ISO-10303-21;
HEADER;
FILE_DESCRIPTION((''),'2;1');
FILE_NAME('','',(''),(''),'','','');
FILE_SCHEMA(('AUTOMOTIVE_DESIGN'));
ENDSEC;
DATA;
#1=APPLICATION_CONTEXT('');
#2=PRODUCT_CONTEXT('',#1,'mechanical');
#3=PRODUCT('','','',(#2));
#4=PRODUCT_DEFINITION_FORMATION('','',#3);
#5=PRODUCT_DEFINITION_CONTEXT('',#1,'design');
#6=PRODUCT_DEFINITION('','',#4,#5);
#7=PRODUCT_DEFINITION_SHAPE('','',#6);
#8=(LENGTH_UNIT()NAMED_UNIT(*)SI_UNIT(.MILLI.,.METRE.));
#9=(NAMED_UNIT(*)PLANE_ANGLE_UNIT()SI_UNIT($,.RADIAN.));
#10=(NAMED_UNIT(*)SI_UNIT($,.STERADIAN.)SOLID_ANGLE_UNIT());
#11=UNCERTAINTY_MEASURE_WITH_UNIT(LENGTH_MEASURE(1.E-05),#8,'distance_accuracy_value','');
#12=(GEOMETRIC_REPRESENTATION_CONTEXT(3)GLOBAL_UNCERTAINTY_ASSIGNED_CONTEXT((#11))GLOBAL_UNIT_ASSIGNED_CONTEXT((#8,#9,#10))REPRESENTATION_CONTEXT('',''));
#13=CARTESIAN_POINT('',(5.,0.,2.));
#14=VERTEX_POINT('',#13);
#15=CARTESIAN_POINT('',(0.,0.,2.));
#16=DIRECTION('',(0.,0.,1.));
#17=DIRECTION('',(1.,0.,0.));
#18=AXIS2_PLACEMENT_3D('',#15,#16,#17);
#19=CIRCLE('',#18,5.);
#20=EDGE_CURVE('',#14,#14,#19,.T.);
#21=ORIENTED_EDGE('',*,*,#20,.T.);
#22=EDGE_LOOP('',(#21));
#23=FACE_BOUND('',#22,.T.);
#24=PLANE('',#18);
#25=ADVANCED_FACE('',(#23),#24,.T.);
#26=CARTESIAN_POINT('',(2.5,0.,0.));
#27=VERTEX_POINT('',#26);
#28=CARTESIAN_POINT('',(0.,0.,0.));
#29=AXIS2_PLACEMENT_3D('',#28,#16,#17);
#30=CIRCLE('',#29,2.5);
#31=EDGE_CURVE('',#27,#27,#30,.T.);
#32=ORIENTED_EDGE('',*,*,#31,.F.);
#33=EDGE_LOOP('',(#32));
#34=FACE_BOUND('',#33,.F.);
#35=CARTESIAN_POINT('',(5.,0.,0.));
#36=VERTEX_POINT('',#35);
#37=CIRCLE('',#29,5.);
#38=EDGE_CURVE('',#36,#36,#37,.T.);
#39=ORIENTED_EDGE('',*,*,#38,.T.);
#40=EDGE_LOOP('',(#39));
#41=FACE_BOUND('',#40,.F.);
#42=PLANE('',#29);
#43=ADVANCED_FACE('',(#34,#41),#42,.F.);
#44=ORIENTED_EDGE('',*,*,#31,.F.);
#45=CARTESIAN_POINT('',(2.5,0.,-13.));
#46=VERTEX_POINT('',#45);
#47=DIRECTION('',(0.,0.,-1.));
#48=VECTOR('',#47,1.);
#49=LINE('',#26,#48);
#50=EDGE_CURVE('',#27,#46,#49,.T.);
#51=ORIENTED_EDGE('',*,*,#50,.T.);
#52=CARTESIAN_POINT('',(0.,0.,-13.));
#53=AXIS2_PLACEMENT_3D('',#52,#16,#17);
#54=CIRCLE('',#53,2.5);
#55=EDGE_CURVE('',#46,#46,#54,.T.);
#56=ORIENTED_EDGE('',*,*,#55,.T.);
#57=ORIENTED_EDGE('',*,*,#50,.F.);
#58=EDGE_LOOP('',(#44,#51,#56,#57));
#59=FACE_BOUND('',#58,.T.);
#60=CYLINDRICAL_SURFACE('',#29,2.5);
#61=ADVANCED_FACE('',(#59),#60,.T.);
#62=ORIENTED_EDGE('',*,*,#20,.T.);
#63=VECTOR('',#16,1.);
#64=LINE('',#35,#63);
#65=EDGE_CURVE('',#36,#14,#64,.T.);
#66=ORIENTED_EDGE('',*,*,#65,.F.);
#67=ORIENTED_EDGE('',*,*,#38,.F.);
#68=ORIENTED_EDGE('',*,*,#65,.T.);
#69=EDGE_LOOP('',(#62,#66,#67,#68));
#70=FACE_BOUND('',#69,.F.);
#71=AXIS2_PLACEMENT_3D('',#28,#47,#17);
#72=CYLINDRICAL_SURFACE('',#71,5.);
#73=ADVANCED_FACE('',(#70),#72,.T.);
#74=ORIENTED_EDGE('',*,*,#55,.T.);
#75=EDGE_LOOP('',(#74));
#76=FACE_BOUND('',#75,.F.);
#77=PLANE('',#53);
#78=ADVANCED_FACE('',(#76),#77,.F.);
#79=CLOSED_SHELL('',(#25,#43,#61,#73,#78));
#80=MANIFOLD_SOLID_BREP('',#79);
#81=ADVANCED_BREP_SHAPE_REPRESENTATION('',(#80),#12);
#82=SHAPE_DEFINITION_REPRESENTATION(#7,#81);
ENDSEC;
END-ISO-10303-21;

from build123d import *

# Parameters (mm, degrees)
F0_R     = 5
F2_DEPTH = 2
F3_R     = 2.5
F4_DEPTH = 13


# Not quite as in the source:
# - the program builds the solid bodies; features that only make, move or delete a surface that nothing else refers to are left out


with BuildPart() as f2:
    # F0 (on Top) → F2 (new body)
    with BuildSketch(Plane.XY):
        Circle(F0_R)
    extrude(amount=F2_DEPTH)

    # F3 (on Top) → F4 (join)
    with BuildSketch(Plane.XY):
        Circle(F3_R)
    extrude(amount=-F4_DEPTH)


solid = f2.part
